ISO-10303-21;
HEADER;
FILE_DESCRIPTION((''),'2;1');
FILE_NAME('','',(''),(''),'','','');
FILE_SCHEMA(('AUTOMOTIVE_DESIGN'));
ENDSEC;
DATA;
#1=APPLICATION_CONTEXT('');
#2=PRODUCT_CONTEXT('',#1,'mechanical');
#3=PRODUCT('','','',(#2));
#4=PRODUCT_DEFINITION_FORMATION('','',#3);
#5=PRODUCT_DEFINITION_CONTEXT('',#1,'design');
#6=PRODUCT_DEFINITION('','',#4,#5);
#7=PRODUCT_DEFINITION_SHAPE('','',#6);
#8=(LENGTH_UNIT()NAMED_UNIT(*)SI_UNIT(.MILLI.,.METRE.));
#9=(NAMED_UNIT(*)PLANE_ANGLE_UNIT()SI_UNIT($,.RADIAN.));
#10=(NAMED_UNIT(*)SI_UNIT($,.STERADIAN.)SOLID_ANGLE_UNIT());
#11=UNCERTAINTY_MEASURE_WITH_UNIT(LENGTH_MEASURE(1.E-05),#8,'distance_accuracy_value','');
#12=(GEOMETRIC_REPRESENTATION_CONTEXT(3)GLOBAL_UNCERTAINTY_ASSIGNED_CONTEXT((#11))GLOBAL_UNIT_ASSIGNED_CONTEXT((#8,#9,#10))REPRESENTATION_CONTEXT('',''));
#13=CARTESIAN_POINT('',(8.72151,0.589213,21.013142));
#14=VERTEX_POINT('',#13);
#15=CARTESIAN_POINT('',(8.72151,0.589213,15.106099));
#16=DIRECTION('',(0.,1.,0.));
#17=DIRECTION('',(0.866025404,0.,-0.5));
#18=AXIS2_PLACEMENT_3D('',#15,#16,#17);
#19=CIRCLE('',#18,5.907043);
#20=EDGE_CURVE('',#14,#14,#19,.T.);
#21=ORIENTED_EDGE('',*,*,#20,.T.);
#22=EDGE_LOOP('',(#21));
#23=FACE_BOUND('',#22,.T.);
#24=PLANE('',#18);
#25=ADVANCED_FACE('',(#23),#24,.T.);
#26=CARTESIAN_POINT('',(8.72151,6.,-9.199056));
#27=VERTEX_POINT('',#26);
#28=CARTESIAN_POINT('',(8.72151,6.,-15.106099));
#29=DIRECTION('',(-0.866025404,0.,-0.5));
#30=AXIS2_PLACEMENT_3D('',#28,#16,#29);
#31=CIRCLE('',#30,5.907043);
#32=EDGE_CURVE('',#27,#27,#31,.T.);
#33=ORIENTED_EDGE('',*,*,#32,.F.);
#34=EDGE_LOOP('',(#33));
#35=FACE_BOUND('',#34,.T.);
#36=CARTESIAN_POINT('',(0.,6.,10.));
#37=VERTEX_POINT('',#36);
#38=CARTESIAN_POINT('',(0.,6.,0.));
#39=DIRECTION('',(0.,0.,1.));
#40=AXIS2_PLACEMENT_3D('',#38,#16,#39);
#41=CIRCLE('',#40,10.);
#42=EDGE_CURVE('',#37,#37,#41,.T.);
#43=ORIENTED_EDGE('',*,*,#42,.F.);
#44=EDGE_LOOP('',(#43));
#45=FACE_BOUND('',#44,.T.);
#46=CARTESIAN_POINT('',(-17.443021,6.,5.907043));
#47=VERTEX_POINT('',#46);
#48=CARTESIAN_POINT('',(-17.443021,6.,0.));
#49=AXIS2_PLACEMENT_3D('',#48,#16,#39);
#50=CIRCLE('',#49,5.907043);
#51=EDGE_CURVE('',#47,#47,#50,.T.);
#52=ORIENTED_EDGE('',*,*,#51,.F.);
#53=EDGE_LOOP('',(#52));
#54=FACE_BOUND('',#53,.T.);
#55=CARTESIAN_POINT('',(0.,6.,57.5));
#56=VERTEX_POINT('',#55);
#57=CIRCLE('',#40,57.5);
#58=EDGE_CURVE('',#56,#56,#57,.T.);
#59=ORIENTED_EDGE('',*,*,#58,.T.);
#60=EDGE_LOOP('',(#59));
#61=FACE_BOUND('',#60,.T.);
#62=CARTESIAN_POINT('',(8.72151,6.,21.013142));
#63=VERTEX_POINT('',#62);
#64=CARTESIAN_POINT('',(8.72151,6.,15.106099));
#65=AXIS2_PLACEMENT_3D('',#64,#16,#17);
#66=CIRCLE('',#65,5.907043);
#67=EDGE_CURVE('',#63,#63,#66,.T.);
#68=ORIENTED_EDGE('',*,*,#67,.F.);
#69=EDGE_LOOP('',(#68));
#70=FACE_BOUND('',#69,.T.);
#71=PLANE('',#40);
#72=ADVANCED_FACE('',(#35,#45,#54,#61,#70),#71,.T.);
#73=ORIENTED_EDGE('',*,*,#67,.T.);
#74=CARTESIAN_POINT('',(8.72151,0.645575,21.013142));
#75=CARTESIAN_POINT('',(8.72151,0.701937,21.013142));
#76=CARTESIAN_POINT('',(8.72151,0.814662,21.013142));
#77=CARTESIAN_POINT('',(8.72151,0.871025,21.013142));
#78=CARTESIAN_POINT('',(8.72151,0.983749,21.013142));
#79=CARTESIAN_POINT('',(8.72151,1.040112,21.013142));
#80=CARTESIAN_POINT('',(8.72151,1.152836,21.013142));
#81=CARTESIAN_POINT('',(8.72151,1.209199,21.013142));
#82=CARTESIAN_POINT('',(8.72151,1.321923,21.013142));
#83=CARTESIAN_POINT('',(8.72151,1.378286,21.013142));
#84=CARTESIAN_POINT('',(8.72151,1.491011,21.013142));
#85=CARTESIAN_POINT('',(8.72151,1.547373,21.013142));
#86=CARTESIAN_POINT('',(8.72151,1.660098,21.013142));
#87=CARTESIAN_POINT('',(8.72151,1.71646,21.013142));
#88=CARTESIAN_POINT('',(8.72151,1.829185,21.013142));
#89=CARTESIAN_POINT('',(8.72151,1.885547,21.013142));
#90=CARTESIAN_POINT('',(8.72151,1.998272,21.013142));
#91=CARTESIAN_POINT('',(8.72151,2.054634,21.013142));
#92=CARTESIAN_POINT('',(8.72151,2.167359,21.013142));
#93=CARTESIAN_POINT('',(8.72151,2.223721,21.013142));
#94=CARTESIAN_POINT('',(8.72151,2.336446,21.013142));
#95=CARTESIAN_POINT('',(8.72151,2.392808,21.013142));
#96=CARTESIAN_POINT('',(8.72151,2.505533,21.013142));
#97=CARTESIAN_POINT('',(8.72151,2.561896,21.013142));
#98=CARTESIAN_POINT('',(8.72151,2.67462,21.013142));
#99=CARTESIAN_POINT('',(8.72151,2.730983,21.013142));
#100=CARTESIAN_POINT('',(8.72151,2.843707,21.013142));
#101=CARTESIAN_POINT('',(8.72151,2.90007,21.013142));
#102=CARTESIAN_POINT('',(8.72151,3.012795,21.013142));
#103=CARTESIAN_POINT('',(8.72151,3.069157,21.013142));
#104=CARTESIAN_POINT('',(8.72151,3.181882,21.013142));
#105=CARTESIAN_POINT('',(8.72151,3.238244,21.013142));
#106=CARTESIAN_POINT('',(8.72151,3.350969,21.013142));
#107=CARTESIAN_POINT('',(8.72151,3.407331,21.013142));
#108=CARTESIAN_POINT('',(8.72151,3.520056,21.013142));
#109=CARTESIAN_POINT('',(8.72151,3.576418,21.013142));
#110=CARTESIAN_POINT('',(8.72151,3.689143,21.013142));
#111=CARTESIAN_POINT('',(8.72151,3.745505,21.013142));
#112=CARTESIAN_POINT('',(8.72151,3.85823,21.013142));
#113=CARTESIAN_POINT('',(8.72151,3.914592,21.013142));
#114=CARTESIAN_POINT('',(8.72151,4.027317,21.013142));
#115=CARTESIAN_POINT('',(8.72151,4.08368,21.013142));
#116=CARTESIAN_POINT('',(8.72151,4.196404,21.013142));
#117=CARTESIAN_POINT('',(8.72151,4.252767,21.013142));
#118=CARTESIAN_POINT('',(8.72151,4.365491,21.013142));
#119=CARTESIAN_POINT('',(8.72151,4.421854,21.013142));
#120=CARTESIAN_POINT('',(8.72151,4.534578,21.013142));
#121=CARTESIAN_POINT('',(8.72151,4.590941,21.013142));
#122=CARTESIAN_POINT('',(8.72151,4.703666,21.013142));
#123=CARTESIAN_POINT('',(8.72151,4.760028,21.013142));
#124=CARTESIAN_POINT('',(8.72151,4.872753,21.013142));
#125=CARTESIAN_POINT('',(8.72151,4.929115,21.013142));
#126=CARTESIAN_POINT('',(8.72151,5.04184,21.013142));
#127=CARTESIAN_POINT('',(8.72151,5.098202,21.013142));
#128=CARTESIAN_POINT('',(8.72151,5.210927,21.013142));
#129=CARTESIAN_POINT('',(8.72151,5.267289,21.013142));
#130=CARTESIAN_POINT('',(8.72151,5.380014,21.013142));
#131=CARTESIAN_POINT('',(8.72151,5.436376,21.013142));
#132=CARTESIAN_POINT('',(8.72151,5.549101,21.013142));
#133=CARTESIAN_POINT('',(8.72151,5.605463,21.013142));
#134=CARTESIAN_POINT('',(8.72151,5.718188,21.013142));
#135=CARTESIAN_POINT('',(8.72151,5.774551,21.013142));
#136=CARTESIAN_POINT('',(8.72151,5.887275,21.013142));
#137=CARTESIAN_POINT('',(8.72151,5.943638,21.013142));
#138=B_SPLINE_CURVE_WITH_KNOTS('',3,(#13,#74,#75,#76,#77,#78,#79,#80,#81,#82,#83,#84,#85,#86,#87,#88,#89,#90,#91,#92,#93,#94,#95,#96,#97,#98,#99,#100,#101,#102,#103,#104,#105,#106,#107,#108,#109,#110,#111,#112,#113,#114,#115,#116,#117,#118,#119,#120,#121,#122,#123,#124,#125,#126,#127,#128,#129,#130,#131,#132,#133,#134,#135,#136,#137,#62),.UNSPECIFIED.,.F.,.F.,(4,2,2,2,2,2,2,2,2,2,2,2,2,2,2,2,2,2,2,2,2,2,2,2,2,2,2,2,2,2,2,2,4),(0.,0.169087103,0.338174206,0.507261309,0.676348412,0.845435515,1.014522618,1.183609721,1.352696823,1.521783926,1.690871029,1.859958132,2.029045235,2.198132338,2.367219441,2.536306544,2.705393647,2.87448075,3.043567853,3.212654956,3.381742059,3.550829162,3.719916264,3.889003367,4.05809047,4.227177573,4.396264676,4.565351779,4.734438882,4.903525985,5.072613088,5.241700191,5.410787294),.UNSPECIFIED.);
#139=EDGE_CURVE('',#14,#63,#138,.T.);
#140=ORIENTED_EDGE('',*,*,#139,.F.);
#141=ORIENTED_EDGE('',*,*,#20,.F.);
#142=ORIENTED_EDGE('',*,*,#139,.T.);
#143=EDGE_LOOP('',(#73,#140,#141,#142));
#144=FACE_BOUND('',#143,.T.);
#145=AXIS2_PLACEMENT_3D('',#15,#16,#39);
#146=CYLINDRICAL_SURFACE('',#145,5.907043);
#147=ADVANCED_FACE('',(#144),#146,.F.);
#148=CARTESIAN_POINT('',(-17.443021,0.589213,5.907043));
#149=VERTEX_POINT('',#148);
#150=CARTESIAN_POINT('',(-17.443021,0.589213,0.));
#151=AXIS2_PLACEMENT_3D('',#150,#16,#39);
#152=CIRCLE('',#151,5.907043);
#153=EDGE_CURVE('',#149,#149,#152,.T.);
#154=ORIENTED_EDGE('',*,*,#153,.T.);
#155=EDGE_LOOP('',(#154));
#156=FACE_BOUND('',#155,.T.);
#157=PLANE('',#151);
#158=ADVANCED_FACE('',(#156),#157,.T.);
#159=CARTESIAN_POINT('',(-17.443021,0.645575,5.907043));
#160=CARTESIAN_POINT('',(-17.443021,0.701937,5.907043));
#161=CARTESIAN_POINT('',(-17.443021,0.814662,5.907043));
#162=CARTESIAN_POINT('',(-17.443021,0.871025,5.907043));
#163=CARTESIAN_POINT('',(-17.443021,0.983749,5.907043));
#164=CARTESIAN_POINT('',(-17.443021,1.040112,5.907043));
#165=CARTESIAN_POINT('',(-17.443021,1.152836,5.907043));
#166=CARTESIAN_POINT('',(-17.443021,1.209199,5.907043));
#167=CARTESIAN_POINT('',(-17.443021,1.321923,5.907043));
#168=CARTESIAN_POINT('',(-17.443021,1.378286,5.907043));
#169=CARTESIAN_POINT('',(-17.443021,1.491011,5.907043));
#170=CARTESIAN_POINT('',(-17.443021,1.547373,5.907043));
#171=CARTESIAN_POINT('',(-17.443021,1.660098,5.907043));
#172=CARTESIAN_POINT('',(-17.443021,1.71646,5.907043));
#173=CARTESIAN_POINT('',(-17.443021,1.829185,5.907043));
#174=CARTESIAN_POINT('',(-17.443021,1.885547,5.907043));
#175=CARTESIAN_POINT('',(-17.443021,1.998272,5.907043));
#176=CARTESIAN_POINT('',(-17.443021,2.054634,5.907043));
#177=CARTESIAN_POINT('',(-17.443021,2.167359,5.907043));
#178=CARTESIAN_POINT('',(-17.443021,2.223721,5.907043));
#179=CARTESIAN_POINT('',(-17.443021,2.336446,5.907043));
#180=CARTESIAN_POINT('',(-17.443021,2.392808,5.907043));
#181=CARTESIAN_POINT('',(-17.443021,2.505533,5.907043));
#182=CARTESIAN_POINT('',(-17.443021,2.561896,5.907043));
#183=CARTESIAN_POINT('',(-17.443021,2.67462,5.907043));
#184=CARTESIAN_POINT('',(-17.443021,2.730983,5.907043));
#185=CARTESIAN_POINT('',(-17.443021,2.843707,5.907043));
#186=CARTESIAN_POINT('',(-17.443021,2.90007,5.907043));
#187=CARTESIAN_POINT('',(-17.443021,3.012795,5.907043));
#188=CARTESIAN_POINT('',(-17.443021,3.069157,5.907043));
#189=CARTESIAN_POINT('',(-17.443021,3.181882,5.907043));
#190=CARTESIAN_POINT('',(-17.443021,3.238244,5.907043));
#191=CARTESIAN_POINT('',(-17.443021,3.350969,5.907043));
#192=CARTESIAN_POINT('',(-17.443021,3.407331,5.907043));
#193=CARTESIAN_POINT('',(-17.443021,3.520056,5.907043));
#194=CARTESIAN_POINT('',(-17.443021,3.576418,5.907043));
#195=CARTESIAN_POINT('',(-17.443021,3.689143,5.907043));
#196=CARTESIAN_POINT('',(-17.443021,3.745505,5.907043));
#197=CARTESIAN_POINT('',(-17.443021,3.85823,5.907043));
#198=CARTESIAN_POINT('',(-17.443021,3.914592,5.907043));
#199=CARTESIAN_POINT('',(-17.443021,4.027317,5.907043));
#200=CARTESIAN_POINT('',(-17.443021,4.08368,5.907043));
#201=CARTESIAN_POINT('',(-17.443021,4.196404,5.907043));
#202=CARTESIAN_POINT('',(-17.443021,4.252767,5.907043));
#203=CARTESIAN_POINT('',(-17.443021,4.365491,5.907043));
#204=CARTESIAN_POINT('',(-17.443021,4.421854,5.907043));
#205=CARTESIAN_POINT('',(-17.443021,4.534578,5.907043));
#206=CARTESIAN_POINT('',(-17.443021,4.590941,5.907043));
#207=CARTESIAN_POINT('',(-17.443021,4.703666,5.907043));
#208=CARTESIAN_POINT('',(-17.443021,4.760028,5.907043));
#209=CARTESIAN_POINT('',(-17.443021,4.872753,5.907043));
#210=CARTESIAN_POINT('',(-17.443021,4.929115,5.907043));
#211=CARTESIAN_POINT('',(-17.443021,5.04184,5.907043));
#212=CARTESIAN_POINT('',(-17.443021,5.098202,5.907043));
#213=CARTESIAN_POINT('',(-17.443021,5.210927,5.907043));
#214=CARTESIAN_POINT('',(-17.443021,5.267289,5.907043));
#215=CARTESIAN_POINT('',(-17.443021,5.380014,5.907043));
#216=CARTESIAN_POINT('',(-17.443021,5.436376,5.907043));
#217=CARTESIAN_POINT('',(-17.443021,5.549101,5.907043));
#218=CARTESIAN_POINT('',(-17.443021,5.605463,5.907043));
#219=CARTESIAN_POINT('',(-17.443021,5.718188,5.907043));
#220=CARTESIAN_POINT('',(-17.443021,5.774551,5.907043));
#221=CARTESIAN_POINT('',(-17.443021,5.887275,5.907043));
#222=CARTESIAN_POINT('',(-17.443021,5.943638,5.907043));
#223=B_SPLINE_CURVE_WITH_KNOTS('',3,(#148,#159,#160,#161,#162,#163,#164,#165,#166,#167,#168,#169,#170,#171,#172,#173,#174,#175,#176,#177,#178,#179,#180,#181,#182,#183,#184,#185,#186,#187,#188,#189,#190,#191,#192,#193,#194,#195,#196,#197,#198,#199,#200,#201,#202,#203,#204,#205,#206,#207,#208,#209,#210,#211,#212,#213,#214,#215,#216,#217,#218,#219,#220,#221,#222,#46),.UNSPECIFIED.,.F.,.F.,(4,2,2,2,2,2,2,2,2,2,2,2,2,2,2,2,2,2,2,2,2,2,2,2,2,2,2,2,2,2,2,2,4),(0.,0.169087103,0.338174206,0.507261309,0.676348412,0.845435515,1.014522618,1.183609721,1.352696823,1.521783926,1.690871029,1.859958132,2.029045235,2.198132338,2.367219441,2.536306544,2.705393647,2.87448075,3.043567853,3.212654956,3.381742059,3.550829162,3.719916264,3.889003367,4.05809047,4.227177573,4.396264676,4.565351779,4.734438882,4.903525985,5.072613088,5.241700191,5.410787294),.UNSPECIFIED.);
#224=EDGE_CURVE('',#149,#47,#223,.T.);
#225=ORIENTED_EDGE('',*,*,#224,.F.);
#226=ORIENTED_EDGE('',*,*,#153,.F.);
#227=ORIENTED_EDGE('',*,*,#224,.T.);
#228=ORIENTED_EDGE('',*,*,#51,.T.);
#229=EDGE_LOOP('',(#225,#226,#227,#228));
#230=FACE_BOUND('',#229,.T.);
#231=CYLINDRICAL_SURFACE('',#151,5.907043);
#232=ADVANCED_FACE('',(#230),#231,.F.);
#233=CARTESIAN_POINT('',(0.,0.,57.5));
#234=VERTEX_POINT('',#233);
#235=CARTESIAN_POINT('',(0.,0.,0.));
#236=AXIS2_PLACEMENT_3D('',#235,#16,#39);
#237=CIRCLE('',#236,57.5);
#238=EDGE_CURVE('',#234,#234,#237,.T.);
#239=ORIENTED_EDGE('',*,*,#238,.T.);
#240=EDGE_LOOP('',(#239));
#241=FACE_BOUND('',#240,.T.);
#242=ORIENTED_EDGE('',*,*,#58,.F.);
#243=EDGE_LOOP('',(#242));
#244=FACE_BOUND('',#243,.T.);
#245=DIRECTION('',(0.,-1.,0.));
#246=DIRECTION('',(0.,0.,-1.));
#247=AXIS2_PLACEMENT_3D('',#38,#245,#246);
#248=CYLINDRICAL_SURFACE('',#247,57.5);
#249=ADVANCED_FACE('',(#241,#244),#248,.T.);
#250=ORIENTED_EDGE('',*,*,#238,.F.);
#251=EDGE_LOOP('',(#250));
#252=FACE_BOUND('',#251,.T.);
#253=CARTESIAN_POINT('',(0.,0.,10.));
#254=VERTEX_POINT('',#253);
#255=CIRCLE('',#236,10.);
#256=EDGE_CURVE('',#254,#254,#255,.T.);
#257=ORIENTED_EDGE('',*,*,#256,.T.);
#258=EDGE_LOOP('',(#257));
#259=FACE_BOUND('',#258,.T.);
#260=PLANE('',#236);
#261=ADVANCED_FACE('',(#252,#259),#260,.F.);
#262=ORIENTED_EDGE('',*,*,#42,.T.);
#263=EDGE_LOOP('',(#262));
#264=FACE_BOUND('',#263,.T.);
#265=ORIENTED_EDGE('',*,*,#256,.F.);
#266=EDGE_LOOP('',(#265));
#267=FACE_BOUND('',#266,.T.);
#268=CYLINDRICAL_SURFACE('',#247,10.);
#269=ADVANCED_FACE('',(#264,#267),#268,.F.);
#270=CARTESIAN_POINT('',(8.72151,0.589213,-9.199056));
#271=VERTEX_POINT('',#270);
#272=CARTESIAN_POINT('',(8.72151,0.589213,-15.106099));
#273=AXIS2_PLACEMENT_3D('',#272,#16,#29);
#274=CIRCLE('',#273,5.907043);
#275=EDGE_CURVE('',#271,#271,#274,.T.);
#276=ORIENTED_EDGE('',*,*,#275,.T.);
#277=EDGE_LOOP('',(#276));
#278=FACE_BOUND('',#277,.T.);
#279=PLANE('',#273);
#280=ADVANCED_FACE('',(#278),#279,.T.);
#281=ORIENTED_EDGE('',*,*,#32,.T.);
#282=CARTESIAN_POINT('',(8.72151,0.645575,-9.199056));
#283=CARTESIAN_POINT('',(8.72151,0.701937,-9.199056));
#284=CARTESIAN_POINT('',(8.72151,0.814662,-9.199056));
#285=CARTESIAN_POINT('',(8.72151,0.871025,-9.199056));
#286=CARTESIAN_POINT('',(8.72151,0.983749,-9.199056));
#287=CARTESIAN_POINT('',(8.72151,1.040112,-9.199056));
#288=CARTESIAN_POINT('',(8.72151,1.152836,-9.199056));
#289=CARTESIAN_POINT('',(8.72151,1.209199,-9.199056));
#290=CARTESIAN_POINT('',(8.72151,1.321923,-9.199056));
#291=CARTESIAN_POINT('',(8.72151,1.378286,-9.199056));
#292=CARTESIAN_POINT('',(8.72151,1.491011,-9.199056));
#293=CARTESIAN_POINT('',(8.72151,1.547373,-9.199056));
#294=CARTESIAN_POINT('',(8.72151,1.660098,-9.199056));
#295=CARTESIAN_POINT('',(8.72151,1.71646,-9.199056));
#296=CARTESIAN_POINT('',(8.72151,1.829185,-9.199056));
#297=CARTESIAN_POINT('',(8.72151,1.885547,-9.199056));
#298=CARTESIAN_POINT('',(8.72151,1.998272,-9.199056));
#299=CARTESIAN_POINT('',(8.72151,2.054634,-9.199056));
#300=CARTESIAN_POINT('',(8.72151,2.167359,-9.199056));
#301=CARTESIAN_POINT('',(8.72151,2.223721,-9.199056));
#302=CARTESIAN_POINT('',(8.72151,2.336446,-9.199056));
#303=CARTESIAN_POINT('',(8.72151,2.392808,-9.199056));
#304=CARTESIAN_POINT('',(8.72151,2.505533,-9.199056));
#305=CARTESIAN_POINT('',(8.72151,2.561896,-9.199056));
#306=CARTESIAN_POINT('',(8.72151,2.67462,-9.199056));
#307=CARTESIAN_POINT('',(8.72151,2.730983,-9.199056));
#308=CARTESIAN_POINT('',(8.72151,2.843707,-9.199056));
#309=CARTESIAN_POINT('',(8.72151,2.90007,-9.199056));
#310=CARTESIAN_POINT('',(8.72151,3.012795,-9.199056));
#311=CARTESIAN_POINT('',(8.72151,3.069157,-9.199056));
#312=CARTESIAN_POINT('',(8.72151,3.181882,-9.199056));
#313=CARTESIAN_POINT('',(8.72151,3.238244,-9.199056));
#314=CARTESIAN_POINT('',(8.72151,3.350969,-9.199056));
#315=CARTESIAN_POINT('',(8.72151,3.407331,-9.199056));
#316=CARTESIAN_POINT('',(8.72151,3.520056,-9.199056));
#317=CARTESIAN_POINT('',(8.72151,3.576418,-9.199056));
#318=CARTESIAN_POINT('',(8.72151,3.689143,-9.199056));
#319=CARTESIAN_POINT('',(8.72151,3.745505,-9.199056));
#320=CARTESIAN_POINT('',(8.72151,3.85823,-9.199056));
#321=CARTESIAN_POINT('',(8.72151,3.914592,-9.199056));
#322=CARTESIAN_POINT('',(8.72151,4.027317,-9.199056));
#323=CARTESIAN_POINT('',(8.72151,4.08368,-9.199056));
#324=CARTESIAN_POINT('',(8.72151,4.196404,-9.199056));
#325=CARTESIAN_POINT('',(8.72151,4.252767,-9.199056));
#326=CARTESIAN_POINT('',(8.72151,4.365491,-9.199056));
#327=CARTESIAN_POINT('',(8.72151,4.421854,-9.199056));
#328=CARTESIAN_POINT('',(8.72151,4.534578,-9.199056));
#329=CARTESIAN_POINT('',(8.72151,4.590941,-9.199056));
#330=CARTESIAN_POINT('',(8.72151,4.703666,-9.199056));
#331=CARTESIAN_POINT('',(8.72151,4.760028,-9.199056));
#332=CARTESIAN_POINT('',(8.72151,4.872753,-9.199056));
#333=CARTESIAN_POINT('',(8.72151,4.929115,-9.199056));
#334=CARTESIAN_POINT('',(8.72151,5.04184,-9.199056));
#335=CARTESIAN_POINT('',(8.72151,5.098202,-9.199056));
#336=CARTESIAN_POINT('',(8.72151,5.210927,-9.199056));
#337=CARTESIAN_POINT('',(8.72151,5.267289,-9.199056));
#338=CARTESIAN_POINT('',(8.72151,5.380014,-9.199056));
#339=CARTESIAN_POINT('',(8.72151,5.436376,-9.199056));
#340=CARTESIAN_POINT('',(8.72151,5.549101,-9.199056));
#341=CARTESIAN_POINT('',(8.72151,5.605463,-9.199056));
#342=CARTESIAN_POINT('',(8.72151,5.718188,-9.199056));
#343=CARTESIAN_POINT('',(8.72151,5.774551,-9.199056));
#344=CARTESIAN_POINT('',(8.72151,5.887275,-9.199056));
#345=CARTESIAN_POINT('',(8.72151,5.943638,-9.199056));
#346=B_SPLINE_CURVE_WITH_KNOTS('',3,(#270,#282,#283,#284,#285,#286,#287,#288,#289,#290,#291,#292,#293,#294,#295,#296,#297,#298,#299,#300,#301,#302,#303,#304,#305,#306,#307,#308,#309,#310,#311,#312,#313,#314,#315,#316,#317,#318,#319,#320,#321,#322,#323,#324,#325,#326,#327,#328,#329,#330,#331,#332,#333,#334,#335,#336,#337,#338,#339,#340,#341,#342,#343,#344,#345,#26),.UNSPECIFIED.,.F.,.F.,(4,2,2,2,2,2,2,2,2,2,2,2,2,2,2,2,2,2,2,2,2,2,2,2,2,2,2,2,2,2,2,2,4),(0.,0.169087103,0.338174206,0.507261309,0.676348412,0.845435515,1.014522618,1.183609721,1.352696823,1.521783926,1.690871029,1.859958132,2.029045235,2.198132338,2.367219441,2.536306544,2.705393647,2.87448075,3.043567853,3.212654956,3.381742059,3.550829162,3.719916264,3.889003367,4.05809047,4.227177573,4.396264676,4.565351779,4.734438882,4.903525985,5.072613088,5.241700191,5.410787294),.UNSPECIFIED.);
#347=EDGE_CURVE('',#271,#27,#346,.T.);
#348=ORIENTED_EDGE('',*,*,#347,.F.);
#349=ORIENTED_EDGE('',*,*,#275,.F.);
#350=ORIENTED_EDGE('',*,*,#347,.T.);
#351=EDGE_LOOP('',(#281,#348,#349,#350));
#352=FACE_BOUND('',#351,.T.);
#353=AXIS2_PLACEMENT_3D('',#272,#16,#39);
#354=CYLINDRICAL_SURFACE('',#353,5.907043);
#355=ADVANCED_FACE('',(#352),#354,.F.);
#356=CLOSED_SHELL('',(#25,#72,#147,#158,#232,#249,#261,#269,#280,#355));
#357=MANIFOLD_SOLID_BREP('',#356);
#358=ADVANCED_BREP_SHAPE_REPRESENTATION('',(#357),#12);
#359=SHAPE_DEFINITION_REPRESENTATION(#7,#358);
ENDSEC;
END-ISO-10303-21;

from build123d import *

# Parameters (mm, degrees)
SKETCH1_R           = 57.5
BOSS_EXTRUDE1_DEPTH = 6
SKETCH2_R           = 10
CUT_EXTRUDE1_DEPTH  = 82.538334543
SKETCH3_R           = 5.907043195
CUT_EXTRUDE2_DEPTH  = 5.410787294
CIRPATTERN1_COUNT   = 3


with BuildPart() as part:
    # Sketch1 → Boss-Extrude1 (new body)
    with BuildSketch(Plane(origin=(0, 0, 0), x_dir=(1, 0, 0), z_dir=(0, 1, 0))):
        Circle(SKETCH1_R)
    extrude(amount=BOSS_EXTRUDE1_DEPTH)

    # Sketch2 → Cut-Extrude1 (cut, through all)
    with BuildSketch(Plane(origin=(0, 0, 0), x_dir=(1, 0, 0), z_dir=(0, 1, 0))):
        Circle(SKETCH2_R)
    extrude(amount=CUT_EXTRUDE1_DEPTH, mode=Mode.SUBTRACT)

    # Sketch3 → Cut-Extrude2 (cut)
    with BuildSketch(Plane(origin=(0, 6, 0), x_dir=(1, 0, 0), z_dir=(0, 1, 0))):
        with Locations((-17.443020835, 0)):
            Circle(SKETCH3_R)
    cut_extrude2 = extrude(amount=-CUT_EXTRUDE2_DEPTH, mode=Mode.SUBTRACT)

    # CirPattern1: Cut-Extrude2 ×3 about axis
    cirpattern1_axis = Axis((0, 0, 0), (0, 1, 0))
    for i in range(1, CIRPATTERN1_COUNT):
        add(cut_extrude2.rotate(cirpattern1_axis, i * 360 / CIRPATTERN1_COUNT), mode=Mode.SUBTRACT)


solid = part.part
